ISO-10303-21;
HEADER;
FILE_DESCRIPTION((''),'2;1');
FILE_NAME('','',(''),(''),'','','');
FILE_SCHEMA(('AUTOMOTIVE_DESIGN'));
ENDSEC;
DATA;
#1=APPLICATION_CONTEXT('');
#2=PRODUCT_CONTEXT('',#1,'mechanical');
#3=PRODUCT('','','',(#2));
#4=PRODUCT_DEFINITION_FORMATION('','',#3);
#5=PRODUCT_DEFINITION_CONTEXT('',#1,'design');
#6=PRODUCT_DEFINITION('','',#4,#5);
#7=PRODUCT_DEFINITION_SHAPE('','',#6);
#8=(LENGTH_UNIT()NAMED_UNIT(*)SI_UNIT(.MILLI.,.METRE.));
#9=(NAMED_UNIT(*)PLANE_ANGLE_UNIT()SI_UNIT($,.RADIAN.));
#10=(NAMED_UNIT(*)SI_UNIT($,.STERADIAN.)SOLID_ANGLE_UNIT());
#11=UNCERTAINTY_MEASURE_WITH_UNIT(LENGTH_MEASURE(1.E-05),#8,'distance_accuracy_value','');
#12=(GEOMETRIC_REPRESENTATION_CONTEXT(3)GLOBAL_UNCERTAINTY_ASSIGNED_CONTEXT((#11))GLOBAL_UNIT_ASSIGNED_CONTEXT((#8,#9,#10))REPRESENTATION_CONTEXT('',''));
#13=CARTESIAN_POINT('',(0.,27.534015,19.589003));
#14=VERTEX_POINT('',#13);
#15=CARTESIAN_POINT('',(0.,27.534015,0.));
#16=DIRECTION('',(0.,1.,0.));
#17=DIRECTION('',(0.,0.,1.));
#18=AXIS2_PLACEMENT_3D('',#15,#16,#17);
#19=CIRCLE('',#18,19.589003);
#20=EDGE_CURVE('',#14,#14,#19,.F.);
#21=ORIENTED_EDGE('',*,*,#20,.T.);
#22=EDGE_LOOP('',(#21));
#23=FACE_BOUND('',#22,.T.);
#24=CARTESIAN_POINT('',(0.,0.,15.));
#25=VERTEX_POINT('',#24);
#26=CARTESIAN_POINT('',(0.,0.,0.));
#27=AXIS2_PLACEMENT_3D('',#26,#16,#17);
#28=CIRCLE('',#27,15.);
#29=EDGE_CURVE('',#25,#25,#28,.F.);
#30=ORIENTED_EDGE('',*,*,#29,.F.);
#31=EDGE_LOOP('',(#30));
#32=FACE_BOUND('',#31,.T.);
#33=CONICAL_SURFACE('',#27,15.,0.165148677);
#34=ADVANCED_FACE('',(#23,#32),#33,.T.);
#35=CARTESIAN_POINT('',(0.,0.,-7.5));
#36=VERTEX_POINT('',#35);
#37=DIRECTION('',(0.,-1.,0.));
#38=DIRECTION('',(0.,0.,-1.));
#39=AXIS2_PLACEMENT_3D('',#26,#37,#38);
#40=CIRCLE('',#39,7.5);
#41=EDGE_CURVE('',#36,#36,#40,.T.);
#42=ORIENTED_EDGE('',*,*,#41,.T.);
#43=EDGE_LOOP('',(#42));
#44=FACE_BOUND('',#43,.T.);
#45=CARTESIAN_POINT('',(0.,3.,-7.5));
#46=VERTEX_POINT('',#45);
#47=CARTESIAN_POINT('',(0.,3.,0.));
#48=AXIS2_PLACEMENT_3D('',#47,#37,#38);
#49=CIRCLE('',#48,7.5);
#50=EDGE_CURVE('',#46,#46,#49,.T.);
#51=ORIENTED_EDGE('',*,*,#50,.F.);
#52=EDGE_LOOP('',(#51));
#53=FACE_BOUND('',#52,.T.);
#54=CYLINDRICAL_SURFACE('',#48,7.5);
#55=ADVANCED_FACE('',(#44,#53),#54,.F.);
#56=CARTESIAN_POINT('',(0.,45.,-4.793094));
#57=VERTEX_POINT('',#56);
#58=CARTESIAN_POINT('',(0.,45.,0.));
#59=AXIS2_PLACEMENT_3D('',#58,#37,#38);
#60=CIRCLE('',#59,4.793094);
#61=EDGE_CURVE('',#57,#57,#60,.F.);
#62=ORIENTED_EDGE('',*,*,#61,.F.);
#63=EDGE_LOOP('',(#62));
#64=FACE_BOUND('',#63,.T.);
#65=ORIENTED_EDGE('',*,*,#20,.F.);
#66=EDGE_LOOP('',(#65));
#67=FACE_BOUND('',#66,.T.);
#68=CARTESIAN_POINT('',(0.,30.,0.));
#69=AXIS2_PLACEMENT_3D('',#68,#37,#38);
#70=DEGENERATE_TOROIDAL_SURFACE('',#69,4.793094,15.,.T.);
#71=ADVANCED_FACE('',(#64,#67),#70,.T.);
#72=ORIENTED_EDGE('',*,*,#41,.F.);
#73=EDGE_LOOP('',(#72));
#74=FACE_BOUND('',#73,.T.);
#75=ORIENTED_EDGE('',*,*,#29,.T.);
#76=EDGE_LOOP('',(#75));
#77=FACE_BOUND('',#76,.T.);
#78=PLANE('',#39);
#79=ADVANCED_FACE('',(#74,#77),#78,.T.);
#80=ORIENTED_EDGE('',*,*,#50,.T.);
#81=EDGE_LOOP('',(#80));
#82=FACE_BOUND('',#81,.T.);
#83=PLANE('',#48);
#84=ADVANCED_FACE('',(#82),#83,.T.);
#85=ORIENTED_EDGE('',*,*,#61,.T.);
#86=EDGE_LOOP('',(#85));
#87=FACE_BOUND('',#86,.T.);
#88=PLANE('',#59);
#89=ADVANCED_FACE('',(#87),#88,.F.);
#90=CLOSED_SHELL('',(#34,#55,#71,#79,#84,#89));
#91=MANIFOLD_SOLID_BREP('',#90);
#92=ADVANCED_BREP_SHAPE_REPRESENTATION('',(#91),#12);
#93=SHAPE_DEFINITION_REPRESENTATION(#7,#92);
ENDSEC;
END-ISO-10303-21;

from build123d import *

# Parameters (mm, degrees)
SKETCH3_R          = 2.5
CUT_EXTRUDE1_DEPTH = 1
FILLET1_R          = 5
SCALE1_SCALE       = 3


# Read off the part's stored shape, not the designer's step: Boundary1
with BuildPart() as part:
    # Boundary1 outline → Boundary1 (revolve)
    with BuildSketch(Plane.XY):
        Polygon((0, 0), (5, 0), (7.5, 15), (0, 15), align=None)
    revolve(axis=Axis((0, 0, 0), (0, 1, 0)))

    # Sketch3 → Cut-Extrude1 (cut)
    with BuildSketch(Plane.XZ):
        with Locations(Location((0, 0, 0), (0, 0, 270))):
            Circle(SKETCH3_R)
    extrude(amount=-CUT_EXTRUDE1_DEPTH, mode=Mode.SUBTRACT)

    # Fillet1
    fillet1_edges = [part.edges().sort_by_distance(p)[0] for p in [
        (-7.5, 15, 0),
    ]]
    fillet(fillet1_edges, radius=FILLET1_R)


with BuildPart() as part_1:
    # Scale1: scaled about (0, 0, 0)
    add(part.part.scale(SCALE1_SCALE))


solid = part_1.part
